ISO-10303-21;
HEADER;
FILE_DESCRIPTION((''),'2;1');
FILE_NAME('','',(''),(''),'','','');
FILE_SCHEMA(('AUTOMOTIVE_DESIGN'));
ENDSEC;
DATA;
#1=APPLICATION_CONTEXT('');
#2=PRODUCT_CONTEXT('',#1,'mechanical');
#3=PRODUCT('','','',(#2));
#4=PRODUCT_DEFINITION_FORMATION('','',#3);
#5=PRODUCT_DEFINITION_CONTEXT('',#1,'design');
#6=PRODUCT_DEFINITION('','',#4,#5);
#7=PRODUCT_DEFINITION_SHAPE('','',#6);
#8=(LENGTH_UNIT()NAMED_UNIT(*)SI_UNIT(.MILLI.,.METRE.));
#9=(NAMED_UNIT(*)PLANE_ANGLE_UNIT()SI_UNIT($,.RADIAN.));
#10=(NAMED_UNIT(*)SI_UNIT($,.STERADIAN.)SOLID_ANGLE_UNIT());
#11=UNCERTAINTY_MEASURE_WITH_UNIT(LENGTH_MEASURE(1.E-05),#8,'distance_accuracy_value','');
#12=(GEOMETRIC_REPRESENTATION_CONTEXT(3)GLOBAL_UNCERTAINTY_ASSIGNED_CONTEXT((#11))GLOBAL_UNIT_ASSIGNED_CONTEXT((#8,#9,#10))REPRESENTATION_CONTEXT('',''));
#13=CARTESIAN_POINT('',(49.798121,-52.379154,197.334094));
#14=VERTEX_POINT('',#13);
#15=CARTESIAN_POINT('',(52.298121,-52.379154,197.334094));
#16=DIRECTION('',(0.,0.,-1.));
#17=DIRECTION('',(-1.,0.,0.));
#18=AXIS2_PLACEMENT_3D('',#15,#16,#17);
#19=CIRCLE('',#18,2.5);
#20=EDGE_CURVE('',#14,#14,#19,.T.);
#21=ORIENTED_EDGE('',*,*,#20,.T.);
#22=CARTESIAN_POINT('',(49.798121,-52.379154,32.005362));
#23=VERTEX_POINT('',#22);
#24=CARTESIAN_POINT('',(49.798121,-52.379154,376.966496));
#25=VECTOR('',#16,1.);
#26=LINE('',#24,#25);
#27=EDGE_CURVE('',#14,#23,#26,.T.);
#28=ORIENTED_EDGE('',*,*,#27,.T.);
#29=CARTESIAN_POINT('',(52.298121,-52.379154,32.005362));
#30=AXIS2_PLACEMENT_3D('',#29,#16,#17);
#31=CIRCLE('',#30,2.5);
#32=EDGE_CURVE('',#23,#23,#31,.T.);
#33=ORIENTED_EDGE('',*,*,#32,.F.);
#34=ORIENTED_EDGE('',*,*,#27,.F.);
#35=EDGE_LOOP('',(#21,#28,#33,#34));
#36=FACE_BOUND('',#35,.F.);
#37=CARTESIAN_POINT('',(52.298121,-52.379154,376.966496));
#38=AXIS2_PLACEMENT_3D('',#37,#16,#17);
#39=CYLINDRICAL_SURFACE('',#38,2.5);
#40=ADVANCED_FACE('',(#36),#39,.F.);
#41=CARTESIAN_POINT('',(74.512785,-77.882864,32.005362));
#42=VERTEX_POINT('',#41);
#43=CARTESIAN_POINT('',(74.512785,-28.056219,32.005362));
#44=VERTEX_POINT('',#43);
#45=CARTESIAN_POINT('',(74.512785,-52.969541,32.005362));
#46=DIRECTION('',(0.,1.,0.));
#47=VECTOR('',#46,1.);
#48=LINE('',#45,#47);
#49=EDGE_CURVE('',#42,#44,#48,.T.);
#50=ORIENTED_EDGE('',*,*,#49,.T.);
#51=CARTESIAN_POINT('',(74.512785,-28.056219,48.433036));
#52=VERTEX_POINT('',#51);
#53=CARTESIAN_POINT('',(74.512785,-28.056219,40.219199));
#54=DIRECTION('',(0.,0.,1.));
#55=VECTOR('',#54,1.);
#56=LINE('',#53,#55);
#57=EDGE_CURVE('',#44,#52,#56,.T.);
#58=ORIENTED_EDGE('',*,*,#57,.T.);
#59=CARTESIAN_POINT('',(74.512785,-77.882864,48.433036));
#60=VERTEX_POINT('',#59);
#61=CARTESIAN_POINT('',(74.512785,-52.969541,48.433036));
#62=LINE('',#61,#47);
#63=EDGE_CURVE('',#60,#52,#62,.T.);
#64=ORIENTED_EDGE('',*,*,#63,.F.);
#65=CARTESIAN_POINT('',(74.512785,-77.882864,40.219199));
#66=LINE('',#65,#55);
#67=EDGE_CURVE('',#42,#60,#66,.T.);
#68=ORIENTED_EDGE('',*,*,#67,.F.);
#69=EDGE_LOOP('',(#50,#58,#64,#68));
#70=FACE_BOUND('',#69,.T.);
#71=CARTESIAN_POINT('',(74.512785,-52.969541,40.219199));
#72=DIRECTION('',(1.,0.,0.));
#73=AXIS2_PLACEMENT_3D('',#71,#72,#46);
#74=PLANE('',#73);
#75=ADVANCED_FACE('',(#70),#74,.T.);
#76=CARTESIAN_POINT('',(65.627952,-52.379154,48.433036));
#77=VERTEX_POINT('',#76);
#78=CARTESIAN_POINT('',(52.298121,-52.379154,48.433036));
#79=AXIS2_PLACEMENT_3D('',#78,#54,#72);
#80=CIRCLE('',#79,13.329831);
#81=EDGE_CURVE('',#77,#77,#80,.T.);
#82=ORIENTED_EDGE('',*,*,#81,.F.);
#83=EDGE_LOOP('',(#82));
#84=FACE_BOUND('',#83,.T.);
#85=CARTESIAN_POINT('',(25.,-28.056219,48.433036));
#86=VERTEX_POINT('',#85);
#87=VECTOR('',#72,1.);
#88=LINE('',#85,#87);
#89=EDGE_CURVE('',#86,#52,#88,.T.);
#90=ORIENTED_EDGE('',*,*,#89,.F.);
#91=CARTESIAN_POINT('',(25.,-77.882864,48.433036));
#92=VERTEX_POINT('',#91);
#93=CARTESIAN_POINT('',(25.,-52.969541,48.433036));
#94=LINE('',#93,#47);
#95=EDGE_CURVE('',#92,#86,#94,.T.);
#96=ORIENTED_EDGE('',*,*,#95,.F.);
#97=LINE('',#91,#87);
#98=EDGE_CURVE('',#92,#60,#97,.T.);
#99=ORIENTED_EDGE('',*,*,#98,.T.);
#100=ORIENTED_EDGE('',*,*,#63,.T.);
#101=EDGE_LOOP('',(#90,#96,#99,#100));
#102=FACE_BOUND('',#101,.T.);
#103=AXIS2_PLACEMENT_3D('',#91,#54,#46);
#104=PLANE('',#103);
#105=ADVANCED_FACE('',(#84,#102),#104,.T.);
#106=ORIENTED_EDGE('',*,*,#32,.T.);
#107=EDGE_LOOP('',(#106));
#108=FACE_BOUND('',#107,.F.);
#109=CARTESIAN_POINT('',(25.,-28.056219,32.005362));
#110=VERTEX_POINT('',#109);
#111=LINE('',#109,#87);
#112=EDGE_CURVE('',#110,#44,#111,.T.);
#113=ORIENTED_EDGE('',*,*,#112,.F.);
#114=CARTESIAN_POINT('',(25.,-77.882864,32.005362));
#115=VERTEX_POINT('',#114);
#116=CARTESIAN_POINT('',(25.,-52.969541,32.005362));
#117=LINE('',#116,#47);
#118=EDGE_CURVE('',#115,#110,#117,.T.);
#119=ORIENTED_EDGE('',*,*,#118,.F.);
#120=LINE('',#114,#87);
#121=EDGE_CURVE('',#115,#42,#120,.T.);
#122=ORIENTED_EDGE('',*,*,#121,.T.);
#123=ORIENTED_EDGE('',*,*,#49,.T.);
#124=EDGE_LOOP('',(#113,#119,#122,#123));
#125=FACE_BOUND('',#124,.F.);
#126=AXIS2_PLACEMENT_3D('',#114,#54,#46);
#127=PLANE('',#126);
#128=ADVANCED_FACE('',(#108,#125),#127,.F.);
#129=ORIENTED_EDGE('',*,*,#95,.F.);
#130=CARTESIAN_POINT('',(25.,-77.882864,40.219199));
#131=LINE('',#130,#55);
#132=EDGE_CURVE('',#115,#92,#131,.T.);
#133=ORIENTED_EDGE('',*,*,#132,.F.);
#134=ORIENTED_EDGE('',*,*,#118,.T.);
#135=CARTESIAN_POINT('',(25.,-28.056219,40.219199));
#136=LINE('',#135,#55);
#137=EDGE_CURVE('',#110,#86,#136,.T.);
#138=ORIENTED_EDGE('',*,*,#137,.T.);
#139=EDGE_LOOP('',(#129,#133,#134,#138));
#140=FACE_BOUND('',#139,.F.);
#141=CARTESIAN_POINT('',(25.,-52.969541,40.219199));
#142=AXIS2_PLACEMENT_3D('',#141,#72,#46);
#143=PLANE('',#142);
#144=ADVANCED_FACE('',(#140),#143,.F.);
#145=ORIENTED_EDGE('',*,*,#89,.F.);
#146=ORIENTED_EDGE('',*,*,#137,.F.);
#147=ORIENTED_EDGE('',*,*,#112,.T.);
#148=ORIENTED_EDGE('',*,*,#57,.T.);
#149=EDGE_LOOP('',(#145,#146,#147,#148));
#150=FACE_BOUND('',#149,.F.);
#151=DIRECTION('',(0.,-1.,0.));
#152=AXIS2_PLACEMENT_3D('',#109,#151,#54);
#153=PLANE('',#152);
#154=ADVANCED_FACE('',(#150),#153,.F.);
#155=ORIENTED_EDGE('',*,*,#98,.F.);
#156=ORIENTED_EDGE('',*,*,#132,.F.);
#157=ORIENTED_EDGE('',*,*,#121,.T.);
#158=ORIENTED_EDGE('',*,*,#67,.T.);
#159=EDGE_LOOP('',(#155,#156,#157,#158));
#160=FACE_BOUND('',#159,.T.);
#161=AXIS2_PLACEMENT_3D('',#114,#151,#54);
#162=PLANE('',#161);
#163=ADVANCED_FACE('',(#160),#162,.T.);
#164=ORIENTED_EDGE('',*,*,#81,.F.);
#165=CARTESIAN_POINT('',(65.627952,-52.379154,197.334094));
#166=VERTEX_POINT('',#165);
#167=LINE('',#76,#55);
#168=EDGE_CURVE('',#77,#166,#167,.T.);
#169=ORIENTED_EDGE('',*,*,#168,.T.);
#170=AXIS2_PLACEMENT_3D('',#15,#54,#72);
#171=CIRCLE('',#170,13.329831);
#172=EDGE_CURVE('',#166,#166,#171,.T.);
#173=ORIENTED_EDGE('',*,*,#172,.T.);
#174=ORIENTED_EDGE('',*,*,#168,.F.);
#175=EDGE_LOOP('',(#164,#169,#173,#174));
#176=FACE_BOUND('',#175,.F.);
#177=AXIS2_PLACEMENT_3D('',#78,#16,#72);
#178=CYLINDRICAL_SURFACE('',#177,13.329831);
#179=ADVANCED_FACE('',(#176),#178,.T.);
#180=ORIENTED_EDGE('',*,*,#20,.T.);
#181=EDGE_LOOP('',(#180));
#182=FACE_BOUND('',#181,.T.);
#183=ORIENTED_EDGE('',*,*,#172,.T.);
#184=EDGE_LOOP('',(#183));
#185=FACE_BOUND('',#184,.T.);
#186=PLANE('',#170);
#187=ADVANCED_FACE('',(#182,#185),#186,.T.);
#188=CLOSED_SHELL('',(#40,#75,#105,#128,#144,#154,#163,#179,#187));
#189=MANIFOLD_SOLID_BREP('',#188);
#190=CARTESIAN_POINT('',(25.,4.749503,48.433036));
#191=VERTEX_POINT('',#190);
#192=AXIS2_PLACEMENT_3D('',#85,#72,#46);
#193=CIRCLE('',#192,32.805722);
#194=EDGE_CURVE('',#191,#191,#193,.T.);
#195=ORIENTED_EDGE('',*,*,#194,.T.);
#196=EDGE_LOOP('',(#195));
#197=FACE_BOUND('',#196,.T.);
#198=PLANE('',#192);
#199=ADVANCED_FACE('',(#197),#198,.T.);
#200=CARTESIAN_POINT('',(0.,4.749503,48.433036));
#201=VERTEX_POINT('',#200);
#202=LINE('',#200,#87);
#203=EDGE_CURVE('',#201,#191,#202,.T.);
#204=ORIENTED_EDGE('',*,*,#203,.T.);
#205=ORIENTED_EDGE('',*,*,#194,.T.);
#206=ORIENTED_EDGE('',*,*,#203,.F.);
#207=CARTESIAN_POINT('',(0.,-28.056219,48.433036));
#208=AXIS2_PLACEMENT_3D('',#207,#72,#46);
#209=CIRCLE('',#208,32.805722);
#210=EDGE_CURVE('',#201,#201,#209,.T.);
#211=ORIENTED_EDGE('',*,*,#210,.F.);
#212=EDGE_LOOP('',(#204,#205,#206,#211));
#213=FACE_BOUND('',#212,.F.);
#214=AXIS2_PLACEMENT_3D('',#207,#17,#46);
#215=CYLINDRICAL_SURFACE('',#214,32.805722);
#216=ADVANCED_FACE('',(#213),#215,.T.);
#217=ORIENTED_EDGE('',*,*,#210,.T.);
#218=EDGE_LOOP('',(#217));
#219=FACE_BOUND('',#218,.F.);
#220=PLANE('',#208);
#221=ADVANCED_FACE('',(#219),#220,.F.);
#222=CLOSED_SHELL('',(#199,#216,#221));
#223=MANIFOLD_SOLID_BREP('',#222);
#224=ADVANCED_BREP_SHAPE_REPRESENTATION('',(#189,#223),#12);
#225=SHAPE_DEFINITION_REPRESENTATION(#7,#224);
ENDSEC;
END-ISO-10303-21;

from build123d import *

# Parameters (mm, degrees)
F0_R     = 32.8057218661
F1_DEPTH = 25
F2_W     = 49.826644361
F2_H     = 16.4276733994
F3_DEPTH = 49.5127849281
F7_R     = 13.3298307558
F4_DEPTH = 148.9010583609
F8_D     = 5


# Not quite as in the source:
# - the program builds the solid bodies; features that only make, move or delete a surface that nothing else refers to are left out


with BuildPart() as f1:
    # F0 (on Right) → F1 (new body)
    with BuildSketch(Plane.YZ):
        with Locations((-28.0562192202, 48.4330356121)):
            Circle(F0_R)
    extrude(amount=F1_DEPTH)


with BuildPart() as f3:
    # F2 (on face) → F3 (new body)
    with BuildSketch(Plane.YZ.offset(25)):
        with Locations((-52.9695414007, 40.2191989124)):
            Rectangle(F2_W, F2_H)
    extrude(amount=F3_DEPTH)

    # F7 (on face) → F4 (join)
    with BuildSketch(Plane.XY.offset(48.4330356121)):
        with Locations((52.2981211543, -52.3791536689)):
            Circle(F7_R)
    extrude(amount=F4_DEPTH)

    # F8 (through all)
    with Locations(Plane.XY.offset(197.334093973)):
        with Locations((52.2981211543, -52.3791536689)):
            Hole(F8_D / 2)


solid = Compound([f1.part, f3.part])
